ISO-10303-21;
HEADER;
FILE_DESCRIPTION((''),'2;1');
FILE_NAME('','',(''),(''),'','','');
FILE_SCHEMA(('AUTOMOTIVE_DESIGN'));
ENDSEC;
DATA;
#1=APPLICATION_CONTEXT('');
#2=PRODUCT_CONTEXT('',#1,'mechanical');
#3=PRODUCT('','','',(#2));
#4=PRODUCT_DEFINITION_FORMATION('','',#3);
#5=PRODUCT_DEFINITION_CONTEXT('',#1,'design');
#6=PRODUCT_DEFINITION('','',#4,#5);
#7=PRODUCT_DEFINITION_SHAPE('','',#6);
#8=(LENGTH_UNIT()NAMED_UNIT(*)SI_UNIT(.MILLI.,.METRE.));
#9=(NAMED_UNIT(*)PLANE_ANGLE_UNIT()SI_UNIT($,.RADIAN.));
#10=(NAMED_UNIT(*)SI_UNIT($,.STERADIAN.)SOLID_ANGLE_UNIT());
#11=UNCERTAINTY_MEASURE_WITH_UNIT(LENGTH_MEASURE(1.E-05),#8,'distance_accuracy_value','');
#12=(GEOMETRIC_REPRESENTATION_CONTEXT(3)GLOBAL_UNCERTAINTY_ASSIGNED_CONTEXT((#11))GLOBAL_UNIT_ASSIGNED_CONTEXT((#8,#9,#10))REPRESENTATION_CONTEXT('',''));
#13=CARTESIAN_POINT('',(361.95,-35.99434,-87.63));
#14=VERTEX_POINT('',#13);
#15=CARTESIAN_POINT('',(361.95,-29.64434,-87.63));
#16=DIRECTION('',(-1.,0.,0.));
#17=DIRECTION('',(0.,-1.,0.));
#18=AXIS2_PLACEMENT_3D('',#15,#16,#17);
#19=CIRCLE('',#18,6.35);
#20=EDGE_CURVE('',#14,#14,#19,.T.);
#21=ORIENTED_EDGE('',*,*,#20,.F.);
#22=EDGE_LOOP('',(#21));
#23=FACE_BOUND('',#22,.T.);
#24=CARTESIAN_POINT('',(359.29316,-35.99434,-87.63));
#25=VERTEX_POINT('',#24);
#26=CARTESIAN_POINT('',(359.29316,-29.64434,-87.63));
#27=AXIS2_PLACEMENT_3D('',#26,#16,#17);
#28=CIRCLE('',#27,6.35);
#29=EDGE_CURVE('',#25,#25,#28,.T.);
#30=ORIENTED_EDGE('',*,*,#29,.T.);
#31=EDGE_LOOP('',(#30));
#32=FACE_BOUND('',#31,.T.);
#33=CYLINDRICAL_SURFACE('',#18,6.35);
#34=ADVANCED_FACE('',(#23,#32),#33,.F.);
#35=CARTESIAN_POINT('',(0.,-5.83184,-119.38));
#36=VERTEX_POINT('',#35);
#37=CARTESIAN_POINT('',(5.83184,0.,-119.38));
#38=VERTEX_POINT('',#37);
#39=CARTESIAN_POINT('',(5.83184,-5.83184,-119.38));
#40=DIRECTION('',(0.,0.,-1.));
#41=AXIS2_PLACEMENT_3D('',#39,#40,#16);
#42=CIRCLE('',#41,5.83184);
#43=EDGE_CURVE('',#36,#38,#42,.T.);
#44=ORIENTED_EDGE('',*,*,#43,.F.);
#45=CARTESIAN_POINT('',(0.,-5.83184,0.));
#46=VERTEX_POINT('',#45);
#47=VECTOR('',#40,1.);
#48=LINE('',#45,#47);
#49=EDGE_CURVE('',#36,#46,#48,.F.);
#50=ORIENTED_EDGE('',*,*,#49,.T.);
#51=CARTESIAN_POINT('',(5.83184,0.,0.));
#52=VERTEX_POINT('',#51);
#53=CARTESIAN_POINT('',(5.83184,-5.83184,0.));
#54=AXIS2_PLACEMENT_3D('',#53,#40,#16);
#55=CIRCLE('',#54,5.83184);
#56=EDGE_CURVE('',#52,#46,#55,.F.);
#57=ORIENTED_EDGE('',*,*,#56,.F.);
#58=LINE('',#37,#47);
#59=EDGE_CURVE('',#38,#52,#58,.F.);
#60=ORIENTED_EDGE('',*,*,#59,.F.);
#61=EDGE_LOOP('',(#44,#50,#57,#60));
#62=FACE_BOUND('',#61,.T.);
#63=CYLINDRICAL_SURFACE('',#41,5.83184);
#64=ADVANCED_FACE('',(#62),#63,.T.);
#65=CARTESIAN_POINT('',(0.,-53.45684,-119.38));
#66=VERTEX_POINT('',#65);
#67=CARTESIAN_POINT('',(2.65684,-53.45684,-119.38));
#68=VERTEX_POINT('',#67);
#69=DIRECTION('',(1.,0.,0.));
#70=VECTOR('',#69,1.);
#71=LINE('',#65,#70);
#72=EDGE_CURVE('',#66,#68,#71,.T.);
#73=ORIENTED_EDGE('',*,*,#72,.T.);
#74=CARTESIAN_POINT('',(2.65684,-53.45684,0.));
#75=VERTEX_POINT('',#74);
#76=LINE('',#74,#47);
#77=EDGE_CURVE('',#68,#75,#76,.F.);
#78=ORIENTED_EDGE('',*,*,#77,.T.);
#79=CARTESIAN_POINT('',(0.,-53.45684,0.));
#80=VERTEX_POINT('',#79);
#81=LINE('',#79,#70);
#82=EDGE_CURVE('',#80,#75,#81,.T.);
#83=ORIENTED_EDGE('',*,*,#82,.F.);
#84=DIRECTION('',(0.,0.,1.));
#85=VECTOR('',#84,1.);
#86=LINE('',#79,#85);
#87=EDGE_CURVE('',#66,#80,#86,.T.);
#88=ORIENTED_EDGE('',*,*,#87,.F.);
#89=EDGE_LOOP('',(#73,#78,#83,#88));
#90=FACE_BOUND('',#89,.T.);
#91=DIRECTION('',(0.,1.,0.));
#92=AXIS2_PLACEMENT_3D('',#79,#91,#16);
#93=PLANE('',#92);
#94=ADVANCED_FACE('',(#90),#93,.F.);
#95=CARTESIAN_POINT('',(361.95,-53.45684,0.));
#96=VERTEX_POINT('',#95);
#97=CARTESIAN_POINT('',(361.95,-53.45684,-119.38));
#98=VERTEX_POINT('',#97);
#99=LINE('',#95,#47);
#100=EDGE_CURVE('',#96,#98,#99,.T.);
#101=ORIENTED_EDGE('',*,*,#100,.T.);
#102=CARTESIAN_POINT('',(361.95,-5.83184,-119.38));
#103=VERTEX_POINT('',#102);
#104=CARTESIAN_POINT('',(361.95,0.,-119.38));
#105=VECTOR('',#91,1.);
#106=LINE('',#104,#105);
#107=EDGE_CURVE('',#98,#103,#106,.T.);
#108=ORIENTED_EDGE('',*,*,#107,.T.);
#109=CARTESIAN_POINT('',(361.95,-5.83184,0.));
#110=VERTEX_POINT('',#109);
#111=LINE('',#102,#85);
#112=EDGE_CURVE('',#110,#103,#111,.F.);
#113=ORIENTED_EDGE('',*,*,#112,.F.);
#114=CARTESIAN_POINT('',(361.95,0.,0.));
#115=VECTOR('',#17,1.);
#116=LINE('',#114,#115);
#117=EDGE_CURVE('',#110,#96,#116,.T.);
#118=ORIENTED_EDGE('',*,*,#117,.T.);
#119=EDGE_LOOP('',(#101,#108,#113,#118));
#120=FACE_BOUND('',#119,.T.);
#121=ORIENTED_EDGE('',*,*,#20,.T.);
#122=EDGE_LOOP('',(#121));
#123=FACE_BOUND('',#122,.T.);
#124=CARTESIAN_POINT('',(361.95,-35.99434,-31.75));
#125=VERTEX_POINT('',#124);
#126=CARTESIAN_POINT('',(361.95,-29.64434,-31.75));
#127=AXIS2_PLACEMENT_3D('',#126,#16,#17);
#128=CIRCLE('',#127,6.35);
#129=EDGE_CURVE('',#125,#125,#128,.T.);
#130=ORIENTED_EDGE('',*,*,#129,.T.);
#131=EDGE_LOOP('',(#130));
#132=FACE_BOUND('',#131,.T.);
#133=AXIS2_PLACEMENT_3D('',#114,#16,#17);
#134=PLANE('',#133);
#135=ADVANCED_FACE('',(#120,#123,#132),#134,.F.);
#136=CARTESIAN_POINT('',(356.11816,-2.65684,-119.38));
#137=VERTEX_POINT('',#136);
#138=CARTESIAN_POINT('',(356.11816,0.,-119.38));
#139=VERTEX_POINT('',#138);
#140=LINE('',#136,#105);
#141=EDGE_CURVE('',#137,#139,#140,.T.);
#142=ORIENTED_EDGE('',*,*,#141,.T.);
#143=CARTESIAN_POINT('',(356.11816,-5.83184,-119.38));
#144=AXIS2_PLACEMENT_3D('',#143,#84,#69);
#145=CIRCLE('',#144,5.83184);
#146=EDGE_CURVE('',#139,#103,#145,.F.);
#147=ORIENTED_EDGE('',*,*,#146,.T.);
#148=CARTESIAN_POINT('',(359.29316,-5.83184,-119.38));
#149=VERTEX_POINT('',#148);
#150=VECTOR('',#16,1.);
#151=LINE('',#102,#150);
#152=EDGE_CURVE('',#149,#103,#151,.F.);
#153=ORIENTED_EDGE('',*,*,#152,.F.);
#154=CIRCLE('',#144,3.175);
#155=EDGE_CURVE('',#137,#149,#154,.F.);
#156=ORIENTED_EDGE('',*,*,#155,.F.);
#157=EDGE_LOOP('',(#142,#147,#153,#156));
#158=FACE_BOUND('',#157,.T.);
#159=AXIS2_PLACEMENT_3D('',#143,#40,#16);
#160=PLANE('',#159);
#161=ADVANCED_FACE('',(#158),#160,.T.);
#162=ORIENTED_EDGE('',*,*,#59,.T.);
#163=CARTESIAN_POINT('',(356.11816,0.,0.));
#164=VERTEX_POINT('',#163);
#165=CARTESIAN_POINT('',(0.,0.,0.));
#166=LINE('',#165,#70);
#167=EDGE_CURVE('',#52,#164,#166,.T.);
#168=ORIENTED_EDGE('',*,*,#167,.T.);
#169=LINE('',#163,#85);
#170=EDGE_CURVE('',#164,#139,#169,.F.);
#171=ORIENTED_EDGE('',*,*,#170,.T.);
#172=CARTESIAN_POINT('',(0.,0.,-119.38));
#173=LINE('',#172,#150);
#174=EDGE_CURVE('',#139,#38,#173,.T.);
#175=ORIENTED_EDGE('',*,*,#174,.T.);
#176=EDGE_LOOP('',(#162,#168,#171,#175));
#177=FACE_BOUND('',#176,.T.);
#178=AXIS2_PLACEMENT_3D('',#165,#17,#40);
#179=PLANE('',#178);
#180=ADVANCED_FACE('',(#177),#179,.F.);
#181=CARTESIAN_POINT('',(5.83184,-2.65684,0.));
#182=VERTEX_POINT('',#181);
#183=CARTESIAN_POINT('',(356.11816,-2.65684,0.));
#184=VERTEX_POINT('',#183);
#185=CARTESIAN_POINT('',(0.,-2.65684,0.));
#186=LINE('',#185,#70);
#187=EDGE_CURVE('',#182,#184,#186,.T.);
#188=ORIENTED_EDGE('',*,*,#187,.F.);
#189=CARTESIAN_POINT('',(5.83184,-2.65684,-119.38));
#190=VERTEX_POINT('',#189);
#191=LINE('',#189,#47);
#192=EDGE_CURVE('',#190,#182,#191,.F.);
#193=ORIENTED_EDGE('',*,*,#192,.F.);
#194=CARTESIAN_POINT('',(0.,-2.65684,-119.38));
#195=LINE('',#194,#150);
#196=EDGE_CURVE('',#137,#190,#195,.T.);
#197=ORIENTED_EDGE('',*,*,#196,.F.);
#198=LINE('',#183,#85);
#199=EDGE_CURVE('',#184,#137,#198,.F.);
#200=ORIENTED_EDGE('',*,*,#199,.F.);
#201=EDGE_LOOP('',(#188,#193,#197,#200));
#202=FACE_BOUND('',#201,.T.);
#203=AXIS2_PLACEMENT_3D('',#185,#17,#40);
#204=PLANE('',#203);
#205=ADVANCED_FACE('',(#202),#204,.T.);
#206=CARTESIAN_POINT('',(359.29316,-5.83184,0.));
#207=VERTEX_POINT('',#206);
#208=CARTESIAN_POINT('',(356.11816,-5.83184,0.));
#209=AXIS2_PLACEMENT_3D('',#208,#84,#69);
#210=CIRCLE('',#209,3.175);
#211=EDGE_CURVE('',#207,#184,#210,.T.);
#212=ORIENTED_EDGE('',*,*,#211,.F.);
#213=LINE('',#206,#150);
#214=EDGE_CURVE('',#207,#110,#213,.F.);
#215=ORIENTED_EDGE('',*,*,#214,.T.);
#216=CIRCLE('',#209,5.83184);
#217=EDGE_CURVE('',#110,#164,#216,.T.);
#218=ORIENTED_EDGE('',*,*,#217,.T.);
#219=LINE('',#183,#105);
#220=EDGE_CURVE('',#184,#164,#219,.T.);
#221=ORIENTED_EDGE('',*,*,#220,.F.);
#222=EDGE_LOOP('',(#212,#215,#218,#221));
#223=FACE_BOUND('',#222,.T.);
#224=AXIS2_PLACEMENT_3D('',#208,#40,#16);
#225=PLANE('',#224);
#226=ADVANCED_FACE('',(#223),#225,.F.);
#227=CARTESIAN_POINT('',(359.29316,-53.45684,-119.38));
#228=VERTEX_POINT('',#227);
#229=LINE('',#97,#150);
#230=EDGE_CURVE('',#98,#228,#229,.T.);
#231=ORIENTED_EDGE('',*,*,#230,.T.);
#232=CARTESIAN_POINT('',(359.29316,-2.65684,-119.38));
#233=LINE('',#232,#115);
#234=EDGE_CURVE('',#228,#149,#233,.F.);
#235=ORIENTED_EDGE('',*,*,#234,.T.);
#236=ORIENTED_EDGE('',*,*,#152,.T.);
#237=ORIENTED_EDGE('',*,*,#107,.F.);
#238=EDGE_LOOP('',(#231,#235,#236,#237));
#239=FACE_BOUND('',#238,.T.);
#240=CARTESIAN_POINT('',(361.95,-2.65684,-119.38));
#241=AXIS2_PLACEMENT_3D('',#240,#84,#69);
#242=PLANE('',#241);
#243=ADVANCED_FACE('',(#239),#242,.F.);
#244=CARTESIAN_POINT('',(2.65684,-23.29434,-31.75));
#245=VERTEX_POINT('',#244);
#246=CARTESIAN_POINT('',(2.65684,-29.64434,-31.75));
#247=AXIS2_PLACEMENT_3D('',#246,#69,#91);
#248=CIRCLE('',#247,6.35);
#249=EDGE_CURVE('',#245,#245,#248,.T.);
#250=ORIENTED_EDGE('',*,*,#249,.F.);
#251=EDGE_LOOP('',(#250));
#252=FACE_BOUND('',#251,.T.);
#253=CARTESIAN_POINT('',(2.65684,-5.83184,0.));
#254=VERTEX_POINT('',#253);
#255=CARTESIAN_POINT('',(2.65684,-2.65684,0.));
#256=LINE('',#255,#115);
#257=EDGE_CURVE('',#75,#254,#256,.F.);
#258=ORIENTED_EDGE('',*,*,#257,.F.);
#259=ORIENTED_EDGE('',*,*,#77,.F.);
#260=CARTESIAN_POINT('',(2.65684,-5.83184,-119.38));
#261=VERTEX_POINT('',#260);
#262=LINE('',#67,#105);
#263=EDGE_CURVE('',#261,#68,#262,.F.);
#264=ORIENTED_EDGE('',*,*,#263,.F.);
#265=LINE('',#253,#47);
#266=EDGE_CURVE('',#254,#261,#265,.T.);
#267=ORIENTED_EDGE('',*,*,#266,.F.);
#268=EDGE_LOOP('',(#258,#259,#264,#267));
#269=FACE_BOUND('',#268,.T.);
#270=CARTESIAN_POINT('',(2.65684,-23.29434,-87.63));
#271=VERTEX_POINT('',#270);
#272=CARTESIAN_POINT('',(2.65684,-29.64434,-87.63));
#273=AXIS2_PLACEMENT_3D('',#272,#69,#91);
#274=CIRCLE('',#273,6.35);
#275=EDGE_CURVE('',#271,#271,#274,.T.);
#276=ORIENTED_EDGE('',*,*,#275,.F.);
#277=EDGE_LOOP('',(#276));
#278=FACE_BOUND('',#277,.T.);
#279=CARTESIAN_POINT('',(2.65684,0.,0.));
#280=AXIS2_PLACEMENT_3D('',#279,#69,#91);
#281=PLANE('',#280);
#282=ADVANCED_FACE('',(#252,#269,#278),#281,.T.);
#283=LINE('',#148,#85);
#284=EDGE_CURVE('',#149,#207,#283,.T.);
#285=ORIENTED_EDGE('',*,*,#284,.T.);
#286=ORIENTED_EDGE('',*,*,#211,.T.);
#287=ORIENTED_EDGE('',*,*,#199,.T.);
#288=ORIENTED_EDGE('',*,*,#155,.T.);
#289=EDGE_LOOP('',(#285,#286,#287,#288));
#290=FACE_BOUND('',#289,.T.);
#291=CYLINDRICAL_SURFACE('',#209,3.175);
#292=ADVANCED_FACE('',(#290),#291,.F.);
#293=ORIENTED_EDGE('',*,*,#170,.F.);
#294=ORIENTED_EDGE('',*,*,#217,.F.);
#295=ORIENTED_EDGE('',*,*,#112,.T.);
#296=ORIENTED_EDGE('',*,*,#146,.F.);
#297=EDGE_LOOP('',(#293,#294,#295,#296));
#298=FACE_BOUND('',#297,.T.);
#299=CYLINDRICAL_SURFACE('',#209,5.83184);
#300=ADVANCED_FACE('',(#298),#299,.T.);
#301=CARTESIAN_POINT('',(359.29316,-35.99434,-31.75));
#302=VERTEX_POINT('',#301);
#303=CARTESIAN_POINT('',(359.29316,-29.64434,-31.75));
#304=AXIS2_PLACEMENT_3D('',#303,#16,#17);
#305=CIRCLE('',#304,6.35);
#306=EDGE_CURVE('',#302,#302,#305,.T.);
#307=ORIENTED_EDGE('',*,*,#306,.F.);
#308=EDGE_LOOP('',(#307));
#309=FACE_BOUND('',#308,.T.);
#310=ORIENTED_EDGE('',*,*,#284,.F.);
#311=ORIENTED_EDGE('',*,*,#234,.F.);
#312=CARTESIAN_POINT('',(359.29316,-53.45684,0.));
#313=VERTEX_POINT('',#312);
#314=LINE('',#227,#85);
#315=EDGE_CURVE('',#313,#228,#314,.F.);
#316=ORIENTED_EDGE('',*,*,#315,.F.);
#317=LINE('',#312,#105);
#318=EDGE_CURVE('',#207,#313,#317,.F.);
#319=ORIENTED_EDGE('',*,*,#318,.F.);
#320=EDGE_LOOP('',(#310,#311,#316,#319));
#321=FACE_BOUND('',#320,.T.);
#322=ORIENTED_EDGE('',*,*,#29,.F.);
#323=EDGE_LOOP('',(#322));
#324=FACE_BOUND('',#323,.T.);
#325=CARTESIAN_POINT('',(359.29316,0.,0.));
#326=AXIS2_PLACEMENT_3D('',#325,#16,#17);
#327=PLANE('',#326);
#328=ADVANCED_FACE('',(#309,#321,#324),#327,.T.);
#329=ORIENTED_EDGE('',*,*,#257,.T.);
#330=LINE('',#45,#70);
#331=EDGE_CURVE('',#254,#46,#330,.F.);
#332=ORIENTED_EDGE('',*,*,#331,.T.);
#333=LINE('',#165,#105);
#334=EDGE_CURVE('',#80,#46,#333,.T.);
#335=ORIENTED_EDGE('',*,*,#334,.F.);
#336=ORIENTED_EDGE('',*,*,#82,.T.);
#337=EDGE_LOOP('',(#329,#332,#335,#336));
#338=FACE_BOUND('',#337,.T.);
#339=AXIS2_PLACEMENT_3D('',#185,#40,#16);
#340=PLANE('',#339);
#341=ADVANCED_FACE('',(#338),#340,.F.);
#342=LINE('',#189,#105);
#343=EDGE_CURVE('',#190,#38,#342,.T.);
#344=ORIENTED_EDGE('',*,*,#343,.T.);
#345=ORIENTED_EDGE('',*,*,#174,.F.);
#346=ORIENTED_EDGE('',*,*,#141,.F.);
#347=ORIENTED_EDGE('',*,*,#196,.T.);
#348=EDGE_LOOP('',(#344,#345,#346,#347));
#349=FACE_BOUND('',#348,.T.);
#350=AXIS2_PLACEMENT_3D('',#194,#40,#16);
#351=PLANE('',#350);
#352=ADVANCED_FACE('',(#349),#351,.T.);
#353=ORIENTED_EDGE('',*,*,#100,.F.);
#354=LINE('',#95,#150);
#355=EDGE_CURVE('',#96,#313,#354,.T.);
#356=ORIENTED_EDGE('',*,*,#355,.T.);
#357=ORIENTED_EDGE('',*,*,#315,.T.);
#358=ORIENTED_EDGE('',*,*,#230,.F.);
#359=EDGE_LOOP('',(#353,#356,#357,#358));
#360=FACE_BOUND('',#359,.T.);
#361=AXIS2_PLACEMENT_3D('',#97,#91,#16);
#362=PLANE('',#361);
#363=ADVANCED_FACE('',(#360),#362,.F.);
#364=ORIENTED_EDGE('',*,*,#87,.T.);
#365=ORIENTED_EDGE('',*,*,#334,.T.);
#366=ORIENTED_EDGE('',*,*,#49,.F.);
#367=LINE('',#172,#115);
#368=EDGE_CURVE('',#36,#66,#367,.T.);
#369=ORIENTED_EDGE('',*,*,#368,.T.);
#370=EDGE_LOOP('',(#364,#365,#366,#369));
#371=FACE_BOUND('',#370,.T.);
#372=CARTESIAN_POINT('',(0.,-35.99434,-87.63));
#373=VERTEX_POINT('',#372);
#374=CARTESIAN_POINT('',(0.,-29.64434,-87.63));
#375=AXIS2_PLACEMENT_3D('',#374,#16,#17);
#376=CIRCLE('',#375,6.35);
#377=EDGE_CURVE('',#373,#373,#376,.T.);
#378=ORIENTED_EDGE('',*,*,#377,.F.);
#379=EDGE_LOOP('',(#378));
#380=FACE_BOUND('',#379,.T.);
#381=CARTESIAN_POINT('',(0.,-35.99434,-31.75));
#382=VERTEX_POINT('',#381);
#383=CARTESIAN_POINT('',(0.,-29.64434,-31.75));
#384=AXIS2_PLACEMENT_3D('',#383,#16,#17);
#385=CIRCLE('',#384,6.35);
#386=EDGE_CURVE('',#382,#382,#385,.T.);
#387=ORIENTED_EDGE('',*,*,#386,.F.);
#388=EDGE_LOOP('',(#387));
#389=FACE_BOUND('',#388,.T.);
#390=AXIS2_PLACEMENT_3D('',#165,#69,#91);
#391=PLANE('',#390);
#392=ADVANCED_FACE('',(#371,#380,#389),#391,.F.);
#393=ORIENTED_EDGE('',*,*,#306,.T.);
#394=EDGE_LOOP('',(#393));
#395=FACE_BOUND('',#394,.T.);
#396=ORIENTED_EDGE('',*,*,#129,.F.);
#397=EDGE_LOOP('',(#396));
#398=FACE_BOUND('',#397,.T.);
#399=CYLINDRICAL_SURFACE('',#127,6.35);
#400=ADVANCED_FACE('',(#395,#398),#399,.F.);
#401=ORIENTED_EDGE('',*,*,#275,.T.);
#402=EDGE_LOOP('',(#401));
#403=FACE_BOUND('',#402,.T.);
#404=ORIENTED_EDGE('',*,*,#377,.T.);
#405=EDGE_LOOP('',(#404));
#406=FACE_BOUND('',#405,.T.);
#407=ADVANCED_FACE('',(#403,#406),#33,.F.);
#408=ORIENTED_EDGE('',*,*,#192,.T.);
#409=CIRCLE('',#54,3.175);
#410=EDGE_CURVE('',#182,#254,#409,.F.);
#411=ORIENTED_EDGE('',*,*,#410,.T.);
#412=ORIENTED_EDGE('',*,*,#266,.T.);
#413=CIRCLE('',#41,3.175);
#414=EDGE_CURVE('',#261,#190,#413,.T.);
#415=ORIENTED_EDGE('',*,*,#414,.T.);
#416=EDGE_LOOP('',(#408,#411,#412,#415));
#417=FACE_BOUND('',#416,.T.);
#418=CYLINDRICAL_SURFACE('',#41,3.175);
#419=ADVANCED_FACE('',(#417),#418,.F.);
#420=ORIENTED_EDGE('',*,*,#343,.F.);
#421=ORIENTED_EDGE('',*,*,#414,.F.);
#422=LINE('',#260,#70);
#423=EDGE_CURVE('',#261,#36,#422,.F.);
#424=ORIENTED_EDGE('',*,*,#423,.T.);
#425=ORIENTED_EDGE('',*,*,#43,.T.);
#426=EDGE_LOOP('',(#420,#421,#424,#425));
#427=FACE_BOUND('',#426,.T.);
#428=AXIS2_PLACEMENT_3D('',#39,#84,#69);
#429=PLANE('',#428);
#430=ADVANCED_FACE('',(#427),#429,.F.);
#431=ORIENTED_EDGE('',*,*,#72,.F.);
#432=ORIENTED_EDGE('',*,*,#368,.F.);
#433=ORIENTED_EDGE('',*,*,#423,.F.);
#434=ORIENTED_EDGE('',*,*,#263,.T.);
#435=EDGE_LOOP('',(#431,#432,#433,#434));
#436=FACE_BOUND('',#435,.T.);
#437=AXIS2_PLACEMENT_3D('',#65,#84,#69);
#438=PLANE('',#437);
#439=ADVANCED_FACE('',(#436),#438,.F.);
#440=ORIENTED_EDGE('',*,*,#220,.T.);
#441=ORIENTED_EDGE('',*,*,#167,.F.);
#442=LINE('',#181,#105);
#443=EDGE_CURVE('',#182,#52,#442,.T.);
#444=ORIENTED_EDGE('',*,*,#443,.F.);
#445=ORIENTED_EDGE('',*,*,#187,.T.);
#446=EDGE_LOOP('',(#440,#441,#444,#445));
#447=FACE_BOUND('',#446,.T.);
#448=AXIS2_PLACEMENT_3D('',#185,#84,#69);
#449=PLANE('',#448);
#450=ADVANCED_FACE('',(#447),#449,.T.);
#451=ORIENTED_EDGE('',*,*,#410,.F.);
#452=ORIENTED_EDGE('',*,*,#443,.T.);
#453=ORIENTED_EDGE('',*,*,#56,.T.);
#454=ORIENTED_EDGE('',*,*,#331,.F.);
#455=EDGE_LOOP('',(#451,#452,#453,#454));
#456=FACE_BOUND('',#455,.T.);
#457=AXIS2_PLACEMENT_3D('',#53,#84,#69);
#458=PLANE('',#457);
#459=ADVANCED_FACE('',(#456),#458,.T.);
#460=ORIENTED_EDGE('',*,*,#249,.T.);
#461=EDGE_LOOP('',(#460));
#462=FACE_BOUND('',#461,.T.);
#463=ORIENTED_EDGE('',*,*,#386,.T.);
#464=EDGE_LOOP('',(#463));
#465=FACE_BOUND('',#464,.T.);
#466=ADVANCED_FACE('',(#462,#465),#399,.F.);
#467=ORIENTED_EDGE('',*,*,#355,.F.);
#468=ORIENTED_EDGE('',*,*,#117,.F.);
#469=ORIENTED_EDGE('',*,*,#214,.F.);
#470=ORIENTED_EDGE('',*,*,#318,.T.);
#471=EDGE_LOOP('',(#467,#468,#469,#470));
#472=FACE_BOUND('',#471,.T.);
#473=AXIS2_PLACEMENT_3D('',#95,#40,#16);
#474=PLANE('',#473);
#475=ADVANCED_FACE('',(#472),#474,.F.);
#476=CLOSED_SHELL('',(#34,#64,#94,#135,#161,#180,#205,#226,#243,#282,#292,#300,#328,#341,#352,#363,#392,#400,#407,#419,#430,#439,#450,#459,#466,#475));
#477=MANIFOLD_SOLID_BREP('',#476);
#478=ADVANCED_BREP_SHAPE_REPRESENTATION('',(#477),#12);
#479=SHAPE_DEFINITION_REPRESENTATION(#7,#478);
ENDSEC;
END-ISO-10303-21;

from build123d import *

# Parameters (mm, degrees)
SKETCH1_W                    = 361.95
SKETCH1_H                    = 119.38
BASE_FLANGE1_DEPTH           = 2.65684
EDGE_FLANGE1_STRIP_W         = 16.97736
EDGE_FLANGE1_STRIP_H         = 2.65684
EDGE_FLANGE1_STRIP_CUT_DEPTH = 119.38
EDGE_FLANGE1_DEPTH           = 119.38
EDGE_FLANGE2_STRIP_W         = 16.97736
EDGE_FLANGE2_STRIP_H         = 2.65684
EDGE_FLANGE2_STRIP_CUT_DEPTH = 119.38
EDGE_FLANGE2_DEPTH           = 119.38
SKETCH12_R                   = 6.35
CUT_EXTRUDE1_DEPTH           = 385.85974152


# Sheet-metal steps are written as plain solids
with BuildPart() as part:
    # Sketch1 → Base-Flange1 (new body)
    with BuildSketch(Plane(origin=(0, 0, 0), x_dir=(1, 0, 0), z_dir=(0, 1, 0))):
        with Locations((180.975, 59.69)):
            Rectangle(SKETCH1_W, SKETCH1_H)
    extrude(amount=-BASE_FLANGE1_DEPTH)

    # Edge-Flange1 strip (across the edge) → Edge-Flange1 strip cut (cut)
    with BuildSketch(Plane(origin=(0, -2.65684, 0), x_dir=(1, 0, 0), z_dir=(0, 0, -1))):
        with Locations((-2.65684, -1.32842)):
            Rectangle(EDGE_FLANGE1_STRIP_W, EDGE_FLANGE1_STRIP_H)
    extrude(amount=EDGE_FLANGE1_STRIP_CUT_DEPTH, mode=Mode.SUBTRACT)

    # Edge-Flange1 section (across the edge) → Edge-Flange1 (add)
    with BuildSketch(Plane(origin=(0, -2.65684, 0), x_dir=(1, 0, 0), z_dir=(0, 0, -1))):
        with BuildLine():
            Line((0, 3.175), (0, 50.8))
            Line((0, 50.8), (2.65684, 50.8))
            Line((2.65684, 50.8), (2.65684, 3.175))
            ThreePointArc((2.65684, 3.175), (3.58677597, 0.92993597), (5.83184, 0))
            Line((5.83184, 0), (5.83184, -2.65684))
            ThreePointArc((5.83184, -2.65684), (1.708106389, -0.948733611), (0, 3.175))
        make_face()
    extrude(amount=EDGE_FLANGE1_DEPTH)

    # Edge-Flange2 strip (across the edge) → Edge-Flange2 strip cut (cut)
    with BuildSketch(Plane(origin=(361.95, -2.65684, -119.38), x_dir=(-1, 0, 0), z_dir=(0, 0, 1))):
        with Locations((-2.65684, -1.32842)):
            Rectangle(EDGE_FLANGE2_STRIP_W, EDGE_FLANGE2_STRIP_H)
    extrude(amount=EDGE_FLANGE2_STRIP_CUT_DEPTH, mode=Mode.SUBTRACT)

    # Edge-Flange2 section (across the edge) → Edge-Flange2 (add)
    with BuildSketch(Plane(origin=(361.95, -2.65684, -119.38), x_dir=(-1, 0, 0), z_dir=(0, 0, 1))):
        with BuildLine():
            Line((0, 3.175), (0, 50.8))
            Line((0, 50.8), (2.65684, 50.8))
            Line((2.65684, 50.8), (2.65684, 3.175))
            ThreePointArc((2.65684, 3.175), (3.58677597, 0.92993597), (5.83184, 0))
            Line((5.83184, 0), (5.83184, -2.65684))
            ThreePointArc((5.83184, -2.65684), (1.708106389, -0.948733611), (0, 3.175))
        make_face()
    extrude(amount=EDGE_FLANGE2_DEPTH)

    # Sketch12 → Cut-Extrude1 (cut, through all)
    with BuildSketch(Plane.ZY):
        with Locations(Location((-87.63, -29.64434, 0), (0, 0, 270))):
            Circle(SKETCH12_R)
        with Locations(Location((-31.75, -29.64434, 0), (0, 0, 270))):
            Circle(SKETCH12_R)
    extrude(amount=-CUT_EXTRUDE1_DEPTH, mode=Mode.SUBTRACT)


solid = part.part
